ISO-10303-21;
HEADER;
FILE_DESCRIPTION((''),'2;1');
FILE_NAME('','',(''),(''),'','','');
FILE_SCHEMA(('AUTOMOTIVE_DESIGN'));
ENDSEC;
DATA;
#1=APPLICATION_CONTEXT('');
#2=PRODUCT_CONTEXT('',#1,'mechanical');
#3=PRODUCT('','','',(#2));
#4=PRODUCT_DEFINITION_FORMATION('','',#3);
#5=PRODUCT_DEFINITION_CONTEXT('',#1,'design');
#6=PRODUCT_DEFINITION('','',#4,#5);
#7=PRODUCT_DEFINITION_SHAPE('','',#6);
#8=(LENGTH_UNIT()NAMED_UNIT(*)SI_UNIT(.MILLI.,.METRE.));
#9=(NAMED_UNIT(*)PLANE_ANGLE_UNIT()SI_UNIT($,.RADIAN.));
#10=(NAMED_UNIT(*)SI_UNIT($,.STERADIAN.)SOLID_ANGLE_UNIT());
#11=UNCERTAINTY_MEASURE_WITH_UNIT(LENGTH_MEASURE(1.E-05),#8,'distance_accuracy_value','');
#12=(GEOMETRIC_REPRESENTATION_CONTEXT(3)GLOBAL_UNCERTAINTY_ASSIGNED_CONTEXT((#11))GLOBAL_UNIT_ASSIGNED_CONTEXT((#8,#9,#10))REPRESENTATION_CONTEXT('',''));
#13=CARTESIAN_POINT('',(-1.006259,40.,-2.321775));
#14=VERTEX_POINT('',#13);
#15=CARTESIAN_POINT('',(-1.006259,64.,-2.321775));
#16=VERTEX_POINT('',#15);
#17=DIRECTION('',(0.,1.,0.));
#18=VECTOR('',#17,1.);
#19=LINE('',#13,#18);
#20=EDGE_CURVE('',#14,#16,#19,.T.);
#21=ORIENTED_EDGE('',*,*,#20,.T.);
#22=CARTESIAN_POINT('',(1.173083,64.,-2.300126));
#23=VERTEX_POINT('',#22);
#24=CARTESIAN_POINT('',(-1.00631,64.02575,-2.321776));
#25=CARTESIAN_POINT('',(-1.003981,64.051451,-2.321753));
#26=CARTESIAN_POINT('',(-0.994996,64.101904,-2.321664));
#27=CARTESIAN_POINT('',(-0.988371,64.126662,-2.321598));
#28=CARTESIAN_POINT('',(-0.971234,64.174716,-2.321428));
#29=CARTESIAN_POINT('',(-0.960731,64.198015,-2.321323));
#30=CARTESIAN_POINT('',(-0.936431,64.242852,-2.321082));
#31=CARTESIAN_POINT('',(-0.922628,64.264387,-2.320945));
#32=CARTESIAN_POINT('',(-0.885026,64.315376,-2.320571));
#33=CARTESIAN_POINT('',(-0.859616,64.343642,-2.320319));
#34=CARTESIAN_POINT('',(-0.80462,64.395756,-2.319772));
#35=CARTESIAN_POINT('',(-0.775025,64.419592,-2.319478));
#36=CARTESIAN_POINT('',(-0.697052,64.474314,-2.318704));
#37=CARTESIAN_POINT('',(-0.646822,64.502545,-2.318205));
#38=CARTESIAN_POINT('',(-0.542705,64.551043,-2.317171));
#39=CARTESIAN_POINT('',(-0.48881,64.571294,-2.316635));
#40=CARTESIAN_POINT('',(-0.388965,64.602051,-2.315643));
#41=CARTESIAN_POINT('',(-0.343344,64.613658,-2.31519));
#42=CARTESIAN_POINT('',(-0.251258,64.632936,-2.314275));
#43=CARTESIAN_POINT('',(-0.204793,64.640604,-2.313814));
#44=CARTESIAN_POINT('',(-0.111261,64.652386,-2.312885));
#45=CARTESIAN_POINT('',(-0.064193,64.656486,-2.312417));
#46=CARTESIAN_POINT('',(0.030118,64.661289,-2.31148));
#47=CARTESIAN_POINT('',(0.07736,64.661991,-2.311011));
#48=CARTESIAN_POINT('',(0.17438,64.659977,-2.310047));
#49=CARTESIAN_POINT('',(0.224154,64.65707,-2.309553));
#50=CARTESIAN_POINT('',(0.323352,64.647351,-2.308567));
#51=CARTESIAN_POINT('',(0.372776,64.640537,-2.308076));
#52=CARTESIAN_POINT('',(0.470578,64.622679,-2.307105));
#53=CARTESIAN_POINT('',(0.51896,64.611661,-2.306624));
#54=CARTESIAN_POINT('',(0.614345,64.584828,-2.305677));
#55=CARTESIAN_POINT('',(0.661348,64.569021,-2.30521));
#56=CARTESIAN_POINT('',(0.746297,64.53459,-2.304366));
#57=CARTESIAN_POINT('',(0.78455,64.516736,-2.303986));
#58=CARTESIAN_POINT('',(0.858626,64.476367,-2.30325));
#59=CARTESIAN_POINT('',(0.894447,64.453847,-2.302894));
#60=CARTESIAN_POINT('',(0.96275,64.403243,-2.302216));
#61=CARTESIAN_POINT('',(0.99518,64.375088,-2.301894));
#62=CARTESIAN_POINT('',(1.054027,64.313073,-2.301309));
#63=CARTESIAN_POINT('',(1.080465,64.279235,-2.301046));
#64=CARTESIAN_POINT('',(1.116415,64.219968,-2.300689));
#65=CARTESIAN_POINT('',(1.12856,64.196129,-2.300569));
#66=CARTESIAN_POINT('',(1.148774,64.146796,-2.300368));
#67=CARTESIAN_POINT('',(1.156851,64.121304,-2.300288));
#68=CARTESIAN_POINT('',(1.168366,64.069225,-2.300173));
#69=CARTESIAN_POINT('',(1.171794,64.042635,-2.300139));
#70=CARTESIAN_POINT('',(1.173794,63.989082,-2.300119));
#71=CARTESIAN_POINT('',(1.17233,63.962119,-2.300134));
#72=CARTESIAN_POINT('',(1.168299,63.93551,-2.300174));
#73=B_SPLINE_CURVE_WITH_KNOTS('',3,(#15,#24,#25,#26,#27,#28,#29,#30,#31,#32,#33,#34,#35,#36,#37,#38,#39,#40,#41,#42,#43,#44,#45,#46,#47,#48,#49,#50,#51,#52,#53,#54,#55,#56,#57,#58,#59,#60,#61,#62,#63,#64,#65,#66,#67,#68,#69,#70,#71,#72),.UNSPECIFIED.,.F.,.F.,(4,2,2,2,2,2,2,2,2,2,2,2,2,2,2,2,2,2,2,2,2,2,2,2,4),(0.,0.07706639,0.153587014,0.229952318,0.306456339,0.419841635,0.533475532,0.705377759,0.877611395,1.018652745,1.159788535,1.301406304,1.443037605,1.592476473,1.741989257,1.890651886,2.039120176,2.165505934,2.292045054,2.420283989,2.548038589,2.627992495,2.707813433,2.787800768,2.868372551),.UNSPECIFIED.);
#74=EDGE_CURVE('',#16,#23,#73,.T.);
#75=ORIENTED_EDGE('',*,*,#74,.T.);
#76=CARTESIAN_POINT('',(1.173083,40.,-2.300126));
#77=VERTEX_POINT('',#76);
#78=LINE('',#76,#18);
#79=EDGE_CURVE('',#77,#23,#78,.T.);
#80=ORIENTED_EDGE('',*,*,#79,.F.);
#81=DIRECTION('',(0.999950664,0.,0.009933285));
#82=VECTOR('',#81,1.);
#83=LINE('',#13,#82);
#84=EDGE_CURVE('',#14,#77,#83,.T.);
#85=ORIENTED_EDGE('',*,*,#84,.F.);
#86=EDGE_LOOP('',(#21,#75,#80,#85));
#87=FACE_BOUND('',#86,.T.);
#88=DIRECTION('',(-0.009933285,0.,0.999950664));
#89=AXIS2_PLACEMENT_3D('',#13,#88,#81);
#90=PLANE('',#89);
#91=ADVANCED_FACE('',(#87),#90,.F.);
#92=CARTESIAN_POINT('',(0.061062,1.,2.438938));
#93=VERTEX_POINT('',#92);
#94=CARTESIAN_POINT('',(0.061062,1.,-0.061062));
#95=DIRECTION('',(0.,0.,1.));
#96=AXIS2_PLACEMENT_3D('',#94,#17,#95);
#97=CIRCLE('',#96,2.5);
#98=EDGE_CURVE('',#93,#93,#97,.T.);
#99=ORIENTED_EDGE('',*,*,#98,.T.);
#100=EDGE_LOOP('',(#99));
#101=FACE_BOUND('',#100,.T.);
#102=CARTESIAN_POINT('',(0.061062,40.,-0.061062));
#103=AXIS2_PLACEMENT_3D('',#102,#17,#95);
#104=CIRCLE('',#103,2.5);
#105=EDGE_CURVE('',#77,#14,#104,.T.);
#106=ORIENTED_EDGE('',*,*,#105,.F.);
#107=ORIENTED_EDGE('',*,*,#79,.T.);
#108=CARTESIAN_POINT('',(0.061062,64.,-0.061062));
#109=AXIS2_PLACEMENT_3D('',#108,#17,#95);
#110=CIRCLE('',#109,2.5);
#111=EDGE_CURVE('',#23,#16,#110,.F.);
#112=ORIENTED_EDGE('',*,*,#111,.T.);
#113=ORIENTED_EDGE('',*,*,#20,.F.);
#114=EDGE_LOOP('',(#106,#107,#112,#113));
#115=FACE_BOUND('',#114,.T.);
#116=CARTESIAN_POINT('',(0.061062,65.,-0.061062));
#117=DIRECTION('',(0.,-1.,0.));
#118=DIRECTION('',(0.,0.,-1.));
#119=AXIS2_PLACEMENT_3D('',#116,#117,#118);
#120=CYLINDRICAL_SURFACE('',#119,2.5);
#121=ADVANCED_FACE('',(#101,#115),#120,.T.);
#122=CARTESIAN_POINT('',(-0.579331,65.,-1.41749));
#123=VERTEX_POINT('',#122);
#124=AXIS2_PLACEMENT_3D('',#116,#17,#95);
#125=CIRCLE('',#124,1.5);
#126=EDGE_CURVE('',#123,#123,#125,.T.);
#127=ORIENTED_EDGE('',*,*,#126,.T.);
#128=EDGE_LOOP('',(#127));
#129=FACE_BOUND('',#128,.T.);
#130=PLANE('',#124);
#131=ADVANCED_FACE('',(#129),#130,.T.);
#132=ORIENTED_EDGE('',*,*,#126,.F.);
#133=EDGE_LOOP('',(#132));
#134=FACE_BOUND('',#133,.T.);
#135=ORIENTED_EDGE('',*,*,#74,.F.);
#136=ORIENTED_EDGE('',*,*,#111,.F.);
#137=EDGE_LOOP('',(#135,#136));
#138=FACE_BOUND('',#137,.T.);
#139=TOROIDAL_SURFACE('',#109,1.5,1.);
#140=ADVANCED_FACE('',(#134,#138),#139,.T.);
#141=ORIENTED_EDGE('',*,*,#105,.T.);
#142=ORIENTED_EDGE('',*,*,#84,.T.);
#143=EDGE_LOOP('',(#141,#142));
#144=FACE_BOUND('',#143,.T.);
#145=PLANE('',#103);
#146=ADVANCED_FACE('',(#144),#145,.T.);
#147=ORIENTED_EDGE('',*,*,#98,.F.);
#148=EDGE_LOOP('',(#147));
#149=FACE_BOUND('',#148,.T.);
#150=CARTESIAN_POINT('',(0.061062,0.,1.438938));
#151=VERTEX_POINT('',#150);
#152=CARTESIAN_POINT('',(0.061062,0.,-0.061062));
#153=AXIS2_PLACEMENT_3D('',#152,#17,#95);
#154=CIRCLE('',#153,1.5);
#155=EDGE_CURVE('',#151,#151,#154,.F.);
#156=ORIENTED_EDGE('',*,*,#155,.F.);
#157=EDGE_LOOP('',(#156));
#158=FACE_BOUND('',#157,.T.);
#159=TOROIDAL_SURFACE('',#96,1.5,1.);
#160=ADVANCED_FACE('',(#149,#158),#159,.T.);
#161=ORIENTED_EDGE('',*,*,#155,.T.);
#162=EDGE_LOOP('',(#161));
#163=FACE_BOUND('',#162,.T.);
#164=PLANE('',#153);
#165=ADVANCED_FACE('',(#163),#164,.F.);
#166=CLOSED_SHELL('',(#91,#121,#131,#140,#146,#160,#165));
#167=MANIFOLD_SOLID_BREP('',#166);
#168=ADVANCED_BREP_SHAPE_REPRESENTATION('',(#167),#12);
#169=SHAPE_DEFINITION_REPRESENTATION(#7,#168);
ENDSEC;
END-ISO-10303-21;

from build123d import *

# Parameters (mm, degrees)
SKETCH2_R           = 2.5
BOSS_EXTRUDE1_DEPTH = 65
CUT_EXTRUDE1_START  = -25
CUT_EXTRUDE1_DEPTH  = 25
FILLET1_R           = 1
FILLET2_R           = 1


with BuildPart() as part:
    # Sketch2 → Boss-Extrude1 (new body)
    with BuildSketch(Plane(origin=(0, 0, 0), x_dir=(1, 0, 0), z_dir=(0, 1, 0))):
        with Locations(Location((0.061061942, 0.061061942, 0), (0, 0, 270))):
            Circle(SKETCH2_R)
    extrude(amount=BOSS_EXTRUDE1_DEPTH)

    # Sketch3 → Cut-Extrude1 (cut)
    with BuildSketch(Plane(origin=(0, 65, 0), x_dir=(1, 0, 0), z_dir=(0, 1, 0)).offset(CUT_EXTRUDE1_START)):
        with BuildLine():
            Line((-1.00625914, 2.321775482), (1.173082806, 2.300126389))
            ThreePointArc((1.173082806, 2.300126389), (0.085895154, 2.560938601), (-1.00625914, 2.321775482))
        make_face()
    extrude(amount=CUT_EXTRUDE1_DEPTH, mode=Mode.SUBTRACT)

    # Fillet1
    # the kernel refuses this fillet: 1 mm, written as the material it takes off along each edge
    with BuildSketch(Plane(origin=(0.061061942, 65, -0.061061942), x_dir=(0.5312663336495629, 0, -0.8472048646759243), z_dir=(0.8472048646759243, 0, 0.5312663336495629))) as fillet1_piece_1:
        with BuildLine():
            CenterArc((2.5 - FILLET1_R, -FILLET1_R), FILLET1_R, 0, 90)
            Line((2.5 - FILLET1_R, 0), (2.5, 0))
            Line((2.5, 0), (2.5, -FILLET1_R))
        make_face()
    revolve(axis=Axis((0.061061942, 65, -0.061061942), (0, 1, 0)), revolution_arc=212.091055881, mode=Mode.SUBTRACT)
    with BuildSketch(Plane(origin=(0.061061942, 65, -0.061061942), x_dir=(0, 0, 1), z_dir=(-1, 0, 0))) as fillet1_piece_2:
        with BuildLine():
            CenterArc((2.5 - FILLET1_R, -FILLET1_R), FILLET1_R, 0, 90)
            Line((2.5 - FILLET1_R, 0), (2.5, 0))
            Line((2.5, 0), (2.5, -FILLET1_R))
        make_face()
    revolve(axis=Axis((0.061061942, 65, -0.061061942), (0, 1, 0)), revolution_arc=210.951767977, mode=Mode.SUBTRACT)

    # Fillet2
    fillet2_edges = [part.edges().sort_by_distance(p)[0] for p in [
        (0.061061942, 0, -2.561061942),
    ]]
    fillet(fillet2_edges, radius=FILLET2_R)


solid = part.part
